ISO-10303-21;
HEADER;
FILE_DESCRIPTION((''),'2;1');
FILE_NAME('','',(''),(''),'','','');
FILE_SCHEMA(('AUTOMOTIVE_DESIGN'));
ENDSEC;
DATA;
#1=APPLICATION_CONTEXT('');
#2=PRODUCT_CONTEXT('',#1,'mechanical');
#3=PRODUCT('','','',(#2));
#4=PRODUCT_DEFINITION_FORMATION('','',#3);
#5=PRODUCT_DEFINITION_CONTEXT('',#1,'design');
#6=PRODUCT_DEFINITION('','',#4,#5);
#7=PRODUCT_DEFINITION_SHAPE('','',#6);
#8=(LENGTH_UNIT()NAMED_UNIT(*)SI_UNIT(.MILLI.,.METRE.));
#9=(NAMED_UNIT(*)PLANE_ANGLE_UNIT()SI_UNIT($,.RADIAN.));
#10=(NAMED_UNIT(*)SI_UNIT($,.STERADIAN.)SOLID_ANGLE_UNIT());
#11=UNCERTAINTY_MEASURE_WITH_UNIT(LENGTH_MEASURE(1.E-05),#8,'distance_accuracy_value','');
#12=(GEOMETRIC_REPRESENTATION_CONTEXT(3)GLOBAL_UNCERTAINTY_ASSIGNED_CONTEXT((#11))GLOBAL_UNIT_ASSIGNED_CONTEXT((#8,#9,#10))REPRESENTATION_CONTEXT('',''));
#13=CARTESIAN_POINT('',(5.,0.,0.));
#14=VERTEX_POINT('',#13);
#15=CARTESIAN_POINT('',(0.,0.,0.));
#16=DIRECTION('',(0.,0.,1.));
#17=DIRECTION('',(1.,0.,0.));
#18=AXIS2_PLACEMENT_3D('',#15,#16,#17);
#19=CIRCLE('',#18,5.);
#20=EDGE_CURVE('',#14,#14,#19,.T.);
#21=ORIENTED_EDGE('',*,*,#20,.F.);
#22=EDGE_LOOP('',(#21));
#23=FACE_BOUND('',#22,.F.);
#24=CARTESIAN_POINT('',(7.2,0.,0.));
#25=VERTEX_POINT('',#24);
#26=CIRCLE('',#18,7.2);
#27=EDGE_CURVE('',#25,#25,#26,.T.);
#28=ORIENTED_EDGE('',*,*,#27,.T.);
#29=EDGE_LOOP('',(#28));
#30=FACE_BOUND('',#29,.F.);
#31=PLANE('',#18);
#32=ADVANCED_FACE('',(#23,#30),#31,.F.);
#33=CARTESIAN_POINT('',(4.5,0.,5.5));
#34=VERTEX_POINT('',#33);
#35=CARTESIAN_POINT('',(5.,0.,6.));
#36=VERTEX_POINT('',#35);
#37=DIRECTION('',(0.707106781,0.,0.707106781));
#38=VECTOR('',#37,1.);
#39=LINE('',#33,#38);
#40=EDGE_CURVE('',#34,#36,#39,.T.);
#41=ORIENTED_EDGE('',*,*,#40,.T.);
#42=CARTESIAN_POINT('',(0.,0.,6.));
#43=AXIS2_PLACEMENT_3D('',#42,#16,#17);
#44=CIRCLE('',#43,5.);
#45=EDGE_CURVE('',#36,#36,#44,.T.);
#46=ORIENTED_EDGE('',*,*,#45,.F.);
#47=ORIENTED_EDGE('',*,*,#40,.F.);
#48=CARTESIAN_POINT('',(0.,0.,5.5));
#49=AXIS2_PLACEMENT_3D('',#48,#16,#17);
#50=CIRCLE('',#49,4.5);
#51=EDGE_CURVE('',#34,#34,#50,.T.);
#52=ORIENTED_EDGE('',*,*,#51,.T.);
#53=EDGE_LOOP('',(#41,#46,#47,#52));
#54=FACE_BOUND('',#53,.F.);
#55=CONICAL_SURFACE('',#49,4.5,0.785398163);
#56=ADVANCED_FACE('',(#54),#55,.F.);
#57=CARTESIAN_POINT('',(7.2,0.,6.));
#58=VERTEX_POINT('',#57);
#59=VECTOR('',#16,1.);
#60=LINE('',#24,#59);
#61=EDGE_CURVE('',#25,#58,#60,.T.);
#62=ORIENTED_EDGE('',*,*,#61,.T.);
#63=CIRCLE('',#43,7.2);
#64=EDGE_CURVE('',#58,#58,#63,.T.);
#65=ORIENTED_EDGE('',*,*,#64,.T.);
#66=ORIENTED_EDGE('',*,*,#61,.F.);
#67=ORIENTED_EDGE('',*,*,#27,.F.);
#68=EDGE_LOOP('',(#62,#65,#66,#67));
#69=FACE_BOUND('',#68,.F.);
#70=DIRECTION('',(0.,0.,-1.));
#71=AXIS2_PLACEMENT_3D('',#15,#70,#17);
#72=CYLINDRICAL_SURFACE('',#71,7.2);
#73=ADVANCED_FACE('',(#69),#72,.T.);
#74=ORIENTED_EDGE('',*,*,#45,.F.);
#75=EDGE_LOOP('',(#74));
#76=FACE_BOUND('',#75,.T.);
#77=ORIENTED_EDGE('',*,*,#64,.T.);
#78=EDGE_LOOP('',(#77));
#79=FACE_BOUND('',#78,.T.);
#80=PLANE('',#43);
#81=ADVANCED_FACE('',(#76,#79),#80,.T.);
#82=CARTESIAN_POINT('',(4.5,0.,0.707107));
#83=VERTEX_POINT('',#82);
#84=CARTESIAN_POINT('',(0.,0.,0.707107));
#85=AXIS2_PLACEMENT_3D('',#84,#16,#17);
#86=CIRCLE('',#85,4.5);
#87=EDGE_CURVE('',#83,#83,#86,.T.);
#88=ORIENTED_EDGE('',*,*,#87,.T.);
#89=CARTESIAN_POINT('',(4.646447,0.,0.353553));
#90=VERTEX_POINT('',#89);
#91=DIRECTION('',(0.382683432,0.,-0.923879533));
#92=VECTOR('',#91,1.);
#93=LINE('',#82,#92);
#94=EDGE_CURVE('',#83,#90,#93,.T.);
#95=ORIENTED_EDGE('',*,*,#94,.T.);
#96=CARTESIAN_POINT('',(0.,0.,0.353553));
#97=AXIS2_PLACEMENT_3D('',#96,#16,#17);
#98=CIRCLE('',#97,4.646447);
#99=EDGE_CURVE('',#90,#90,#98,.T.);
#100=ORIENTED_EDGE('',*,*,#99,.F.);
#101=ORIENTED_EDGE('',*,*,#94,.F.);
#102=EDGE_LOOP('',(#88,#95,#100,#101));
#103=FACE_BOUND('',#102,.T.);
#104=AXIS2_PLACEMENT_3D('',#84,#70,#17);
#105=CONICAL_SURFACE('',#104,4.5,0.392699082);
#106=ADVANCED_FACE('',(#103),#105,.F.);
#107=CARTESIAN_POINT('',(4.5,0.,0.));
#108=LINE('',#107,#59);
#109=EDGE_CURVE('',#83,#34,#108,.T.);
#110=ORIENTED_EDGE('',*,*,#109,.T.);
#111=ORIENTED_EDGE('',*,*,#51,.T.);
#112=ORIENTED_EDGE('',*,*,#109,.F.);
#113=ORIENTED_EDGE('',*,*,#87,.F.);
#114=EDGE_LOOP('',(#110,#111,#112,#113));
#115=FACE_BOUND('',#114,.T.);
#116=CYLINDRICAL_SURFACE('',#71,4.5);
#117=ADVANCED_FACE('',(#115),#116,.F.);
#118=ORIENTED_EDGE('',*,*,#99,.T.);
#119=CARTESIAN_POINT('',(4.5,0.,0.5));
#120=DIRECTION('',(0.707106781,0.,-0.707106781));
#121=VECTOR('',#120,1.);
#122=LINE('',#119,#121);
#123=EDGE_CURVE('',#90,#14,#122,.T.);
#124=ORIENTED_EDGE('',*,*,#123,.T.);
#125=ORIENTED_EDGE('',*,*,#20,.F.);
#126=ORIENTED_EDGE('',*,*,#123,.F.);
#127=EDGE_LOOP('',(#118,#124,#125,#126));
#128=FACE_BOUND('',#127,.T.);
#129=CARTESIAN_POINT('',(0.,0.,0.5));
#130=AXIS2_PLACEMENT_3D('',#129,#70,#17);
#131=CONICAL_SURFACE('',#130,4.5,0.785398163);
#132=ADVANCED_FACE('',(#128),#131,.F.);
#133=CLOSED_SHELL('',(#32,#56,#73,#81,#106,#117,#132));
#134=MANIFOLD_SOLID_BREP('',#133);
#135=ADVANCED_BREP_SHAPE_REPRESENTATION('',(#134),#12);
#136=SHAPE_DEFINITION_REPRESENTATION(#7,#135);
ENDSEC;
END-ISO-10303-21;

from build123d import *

# Parameters (mm, degrees)
F0_R     = 7.2
F0_R_2   = 4.5
F1_DEPTH = 6
F2_SIZE2 = 0.5
F2_SIZE  = 0.5


# Not quite as in the source:
# - a fillet or chamfer that OpenCascade refuses, or shapes differently, is made with other operations: its cross-section is extruded or revolved along the edge and cut away or added


with BuildPart() as f1:
    # F0 (on Top) → F1 (new body)
    with BuildSketch(Plane.XY):
        Circle(F0_R)
        Circle(F0_R_2, mode=Mode.SUBTRACT)
    extrude(amount=F1_DEPTH)

    # F2
    f2_edges = [f1.edges().sort_by_distance(p)[0] for p in [
        (-4.5, 0, 0),
    ]]
    chamfer(f2_edges, length=F2_SIZE, length2=F2_SIZE2)

    # F3: chamfer of 0.5 on 3 edges, made by hand

    # F3_s1 → F3_t2 (revolve, cut)
    with BuildSketch(Plane.XZ):
        Polygon((4.5, 0.7071067812), (4.6464466094, 0.3535533906), (4.5, 0.5), align=None)
    revolve(axis=Axis((0, 0, 0.5), (0, 0, 1)), mode=Mode.SUBTRACT)

    # F3_s3 → F3_t4 (revolve, cut)
    with BuildSketch(Plane.XZ):
        Polygon((4.5, 5.5), (5, 6), (4.5, 6), align=None)
    revolve(axis=Axis((0, 0, 6), (0, 0, 1)), mode=Mode.SUBTRACT)


solid = f1.part
